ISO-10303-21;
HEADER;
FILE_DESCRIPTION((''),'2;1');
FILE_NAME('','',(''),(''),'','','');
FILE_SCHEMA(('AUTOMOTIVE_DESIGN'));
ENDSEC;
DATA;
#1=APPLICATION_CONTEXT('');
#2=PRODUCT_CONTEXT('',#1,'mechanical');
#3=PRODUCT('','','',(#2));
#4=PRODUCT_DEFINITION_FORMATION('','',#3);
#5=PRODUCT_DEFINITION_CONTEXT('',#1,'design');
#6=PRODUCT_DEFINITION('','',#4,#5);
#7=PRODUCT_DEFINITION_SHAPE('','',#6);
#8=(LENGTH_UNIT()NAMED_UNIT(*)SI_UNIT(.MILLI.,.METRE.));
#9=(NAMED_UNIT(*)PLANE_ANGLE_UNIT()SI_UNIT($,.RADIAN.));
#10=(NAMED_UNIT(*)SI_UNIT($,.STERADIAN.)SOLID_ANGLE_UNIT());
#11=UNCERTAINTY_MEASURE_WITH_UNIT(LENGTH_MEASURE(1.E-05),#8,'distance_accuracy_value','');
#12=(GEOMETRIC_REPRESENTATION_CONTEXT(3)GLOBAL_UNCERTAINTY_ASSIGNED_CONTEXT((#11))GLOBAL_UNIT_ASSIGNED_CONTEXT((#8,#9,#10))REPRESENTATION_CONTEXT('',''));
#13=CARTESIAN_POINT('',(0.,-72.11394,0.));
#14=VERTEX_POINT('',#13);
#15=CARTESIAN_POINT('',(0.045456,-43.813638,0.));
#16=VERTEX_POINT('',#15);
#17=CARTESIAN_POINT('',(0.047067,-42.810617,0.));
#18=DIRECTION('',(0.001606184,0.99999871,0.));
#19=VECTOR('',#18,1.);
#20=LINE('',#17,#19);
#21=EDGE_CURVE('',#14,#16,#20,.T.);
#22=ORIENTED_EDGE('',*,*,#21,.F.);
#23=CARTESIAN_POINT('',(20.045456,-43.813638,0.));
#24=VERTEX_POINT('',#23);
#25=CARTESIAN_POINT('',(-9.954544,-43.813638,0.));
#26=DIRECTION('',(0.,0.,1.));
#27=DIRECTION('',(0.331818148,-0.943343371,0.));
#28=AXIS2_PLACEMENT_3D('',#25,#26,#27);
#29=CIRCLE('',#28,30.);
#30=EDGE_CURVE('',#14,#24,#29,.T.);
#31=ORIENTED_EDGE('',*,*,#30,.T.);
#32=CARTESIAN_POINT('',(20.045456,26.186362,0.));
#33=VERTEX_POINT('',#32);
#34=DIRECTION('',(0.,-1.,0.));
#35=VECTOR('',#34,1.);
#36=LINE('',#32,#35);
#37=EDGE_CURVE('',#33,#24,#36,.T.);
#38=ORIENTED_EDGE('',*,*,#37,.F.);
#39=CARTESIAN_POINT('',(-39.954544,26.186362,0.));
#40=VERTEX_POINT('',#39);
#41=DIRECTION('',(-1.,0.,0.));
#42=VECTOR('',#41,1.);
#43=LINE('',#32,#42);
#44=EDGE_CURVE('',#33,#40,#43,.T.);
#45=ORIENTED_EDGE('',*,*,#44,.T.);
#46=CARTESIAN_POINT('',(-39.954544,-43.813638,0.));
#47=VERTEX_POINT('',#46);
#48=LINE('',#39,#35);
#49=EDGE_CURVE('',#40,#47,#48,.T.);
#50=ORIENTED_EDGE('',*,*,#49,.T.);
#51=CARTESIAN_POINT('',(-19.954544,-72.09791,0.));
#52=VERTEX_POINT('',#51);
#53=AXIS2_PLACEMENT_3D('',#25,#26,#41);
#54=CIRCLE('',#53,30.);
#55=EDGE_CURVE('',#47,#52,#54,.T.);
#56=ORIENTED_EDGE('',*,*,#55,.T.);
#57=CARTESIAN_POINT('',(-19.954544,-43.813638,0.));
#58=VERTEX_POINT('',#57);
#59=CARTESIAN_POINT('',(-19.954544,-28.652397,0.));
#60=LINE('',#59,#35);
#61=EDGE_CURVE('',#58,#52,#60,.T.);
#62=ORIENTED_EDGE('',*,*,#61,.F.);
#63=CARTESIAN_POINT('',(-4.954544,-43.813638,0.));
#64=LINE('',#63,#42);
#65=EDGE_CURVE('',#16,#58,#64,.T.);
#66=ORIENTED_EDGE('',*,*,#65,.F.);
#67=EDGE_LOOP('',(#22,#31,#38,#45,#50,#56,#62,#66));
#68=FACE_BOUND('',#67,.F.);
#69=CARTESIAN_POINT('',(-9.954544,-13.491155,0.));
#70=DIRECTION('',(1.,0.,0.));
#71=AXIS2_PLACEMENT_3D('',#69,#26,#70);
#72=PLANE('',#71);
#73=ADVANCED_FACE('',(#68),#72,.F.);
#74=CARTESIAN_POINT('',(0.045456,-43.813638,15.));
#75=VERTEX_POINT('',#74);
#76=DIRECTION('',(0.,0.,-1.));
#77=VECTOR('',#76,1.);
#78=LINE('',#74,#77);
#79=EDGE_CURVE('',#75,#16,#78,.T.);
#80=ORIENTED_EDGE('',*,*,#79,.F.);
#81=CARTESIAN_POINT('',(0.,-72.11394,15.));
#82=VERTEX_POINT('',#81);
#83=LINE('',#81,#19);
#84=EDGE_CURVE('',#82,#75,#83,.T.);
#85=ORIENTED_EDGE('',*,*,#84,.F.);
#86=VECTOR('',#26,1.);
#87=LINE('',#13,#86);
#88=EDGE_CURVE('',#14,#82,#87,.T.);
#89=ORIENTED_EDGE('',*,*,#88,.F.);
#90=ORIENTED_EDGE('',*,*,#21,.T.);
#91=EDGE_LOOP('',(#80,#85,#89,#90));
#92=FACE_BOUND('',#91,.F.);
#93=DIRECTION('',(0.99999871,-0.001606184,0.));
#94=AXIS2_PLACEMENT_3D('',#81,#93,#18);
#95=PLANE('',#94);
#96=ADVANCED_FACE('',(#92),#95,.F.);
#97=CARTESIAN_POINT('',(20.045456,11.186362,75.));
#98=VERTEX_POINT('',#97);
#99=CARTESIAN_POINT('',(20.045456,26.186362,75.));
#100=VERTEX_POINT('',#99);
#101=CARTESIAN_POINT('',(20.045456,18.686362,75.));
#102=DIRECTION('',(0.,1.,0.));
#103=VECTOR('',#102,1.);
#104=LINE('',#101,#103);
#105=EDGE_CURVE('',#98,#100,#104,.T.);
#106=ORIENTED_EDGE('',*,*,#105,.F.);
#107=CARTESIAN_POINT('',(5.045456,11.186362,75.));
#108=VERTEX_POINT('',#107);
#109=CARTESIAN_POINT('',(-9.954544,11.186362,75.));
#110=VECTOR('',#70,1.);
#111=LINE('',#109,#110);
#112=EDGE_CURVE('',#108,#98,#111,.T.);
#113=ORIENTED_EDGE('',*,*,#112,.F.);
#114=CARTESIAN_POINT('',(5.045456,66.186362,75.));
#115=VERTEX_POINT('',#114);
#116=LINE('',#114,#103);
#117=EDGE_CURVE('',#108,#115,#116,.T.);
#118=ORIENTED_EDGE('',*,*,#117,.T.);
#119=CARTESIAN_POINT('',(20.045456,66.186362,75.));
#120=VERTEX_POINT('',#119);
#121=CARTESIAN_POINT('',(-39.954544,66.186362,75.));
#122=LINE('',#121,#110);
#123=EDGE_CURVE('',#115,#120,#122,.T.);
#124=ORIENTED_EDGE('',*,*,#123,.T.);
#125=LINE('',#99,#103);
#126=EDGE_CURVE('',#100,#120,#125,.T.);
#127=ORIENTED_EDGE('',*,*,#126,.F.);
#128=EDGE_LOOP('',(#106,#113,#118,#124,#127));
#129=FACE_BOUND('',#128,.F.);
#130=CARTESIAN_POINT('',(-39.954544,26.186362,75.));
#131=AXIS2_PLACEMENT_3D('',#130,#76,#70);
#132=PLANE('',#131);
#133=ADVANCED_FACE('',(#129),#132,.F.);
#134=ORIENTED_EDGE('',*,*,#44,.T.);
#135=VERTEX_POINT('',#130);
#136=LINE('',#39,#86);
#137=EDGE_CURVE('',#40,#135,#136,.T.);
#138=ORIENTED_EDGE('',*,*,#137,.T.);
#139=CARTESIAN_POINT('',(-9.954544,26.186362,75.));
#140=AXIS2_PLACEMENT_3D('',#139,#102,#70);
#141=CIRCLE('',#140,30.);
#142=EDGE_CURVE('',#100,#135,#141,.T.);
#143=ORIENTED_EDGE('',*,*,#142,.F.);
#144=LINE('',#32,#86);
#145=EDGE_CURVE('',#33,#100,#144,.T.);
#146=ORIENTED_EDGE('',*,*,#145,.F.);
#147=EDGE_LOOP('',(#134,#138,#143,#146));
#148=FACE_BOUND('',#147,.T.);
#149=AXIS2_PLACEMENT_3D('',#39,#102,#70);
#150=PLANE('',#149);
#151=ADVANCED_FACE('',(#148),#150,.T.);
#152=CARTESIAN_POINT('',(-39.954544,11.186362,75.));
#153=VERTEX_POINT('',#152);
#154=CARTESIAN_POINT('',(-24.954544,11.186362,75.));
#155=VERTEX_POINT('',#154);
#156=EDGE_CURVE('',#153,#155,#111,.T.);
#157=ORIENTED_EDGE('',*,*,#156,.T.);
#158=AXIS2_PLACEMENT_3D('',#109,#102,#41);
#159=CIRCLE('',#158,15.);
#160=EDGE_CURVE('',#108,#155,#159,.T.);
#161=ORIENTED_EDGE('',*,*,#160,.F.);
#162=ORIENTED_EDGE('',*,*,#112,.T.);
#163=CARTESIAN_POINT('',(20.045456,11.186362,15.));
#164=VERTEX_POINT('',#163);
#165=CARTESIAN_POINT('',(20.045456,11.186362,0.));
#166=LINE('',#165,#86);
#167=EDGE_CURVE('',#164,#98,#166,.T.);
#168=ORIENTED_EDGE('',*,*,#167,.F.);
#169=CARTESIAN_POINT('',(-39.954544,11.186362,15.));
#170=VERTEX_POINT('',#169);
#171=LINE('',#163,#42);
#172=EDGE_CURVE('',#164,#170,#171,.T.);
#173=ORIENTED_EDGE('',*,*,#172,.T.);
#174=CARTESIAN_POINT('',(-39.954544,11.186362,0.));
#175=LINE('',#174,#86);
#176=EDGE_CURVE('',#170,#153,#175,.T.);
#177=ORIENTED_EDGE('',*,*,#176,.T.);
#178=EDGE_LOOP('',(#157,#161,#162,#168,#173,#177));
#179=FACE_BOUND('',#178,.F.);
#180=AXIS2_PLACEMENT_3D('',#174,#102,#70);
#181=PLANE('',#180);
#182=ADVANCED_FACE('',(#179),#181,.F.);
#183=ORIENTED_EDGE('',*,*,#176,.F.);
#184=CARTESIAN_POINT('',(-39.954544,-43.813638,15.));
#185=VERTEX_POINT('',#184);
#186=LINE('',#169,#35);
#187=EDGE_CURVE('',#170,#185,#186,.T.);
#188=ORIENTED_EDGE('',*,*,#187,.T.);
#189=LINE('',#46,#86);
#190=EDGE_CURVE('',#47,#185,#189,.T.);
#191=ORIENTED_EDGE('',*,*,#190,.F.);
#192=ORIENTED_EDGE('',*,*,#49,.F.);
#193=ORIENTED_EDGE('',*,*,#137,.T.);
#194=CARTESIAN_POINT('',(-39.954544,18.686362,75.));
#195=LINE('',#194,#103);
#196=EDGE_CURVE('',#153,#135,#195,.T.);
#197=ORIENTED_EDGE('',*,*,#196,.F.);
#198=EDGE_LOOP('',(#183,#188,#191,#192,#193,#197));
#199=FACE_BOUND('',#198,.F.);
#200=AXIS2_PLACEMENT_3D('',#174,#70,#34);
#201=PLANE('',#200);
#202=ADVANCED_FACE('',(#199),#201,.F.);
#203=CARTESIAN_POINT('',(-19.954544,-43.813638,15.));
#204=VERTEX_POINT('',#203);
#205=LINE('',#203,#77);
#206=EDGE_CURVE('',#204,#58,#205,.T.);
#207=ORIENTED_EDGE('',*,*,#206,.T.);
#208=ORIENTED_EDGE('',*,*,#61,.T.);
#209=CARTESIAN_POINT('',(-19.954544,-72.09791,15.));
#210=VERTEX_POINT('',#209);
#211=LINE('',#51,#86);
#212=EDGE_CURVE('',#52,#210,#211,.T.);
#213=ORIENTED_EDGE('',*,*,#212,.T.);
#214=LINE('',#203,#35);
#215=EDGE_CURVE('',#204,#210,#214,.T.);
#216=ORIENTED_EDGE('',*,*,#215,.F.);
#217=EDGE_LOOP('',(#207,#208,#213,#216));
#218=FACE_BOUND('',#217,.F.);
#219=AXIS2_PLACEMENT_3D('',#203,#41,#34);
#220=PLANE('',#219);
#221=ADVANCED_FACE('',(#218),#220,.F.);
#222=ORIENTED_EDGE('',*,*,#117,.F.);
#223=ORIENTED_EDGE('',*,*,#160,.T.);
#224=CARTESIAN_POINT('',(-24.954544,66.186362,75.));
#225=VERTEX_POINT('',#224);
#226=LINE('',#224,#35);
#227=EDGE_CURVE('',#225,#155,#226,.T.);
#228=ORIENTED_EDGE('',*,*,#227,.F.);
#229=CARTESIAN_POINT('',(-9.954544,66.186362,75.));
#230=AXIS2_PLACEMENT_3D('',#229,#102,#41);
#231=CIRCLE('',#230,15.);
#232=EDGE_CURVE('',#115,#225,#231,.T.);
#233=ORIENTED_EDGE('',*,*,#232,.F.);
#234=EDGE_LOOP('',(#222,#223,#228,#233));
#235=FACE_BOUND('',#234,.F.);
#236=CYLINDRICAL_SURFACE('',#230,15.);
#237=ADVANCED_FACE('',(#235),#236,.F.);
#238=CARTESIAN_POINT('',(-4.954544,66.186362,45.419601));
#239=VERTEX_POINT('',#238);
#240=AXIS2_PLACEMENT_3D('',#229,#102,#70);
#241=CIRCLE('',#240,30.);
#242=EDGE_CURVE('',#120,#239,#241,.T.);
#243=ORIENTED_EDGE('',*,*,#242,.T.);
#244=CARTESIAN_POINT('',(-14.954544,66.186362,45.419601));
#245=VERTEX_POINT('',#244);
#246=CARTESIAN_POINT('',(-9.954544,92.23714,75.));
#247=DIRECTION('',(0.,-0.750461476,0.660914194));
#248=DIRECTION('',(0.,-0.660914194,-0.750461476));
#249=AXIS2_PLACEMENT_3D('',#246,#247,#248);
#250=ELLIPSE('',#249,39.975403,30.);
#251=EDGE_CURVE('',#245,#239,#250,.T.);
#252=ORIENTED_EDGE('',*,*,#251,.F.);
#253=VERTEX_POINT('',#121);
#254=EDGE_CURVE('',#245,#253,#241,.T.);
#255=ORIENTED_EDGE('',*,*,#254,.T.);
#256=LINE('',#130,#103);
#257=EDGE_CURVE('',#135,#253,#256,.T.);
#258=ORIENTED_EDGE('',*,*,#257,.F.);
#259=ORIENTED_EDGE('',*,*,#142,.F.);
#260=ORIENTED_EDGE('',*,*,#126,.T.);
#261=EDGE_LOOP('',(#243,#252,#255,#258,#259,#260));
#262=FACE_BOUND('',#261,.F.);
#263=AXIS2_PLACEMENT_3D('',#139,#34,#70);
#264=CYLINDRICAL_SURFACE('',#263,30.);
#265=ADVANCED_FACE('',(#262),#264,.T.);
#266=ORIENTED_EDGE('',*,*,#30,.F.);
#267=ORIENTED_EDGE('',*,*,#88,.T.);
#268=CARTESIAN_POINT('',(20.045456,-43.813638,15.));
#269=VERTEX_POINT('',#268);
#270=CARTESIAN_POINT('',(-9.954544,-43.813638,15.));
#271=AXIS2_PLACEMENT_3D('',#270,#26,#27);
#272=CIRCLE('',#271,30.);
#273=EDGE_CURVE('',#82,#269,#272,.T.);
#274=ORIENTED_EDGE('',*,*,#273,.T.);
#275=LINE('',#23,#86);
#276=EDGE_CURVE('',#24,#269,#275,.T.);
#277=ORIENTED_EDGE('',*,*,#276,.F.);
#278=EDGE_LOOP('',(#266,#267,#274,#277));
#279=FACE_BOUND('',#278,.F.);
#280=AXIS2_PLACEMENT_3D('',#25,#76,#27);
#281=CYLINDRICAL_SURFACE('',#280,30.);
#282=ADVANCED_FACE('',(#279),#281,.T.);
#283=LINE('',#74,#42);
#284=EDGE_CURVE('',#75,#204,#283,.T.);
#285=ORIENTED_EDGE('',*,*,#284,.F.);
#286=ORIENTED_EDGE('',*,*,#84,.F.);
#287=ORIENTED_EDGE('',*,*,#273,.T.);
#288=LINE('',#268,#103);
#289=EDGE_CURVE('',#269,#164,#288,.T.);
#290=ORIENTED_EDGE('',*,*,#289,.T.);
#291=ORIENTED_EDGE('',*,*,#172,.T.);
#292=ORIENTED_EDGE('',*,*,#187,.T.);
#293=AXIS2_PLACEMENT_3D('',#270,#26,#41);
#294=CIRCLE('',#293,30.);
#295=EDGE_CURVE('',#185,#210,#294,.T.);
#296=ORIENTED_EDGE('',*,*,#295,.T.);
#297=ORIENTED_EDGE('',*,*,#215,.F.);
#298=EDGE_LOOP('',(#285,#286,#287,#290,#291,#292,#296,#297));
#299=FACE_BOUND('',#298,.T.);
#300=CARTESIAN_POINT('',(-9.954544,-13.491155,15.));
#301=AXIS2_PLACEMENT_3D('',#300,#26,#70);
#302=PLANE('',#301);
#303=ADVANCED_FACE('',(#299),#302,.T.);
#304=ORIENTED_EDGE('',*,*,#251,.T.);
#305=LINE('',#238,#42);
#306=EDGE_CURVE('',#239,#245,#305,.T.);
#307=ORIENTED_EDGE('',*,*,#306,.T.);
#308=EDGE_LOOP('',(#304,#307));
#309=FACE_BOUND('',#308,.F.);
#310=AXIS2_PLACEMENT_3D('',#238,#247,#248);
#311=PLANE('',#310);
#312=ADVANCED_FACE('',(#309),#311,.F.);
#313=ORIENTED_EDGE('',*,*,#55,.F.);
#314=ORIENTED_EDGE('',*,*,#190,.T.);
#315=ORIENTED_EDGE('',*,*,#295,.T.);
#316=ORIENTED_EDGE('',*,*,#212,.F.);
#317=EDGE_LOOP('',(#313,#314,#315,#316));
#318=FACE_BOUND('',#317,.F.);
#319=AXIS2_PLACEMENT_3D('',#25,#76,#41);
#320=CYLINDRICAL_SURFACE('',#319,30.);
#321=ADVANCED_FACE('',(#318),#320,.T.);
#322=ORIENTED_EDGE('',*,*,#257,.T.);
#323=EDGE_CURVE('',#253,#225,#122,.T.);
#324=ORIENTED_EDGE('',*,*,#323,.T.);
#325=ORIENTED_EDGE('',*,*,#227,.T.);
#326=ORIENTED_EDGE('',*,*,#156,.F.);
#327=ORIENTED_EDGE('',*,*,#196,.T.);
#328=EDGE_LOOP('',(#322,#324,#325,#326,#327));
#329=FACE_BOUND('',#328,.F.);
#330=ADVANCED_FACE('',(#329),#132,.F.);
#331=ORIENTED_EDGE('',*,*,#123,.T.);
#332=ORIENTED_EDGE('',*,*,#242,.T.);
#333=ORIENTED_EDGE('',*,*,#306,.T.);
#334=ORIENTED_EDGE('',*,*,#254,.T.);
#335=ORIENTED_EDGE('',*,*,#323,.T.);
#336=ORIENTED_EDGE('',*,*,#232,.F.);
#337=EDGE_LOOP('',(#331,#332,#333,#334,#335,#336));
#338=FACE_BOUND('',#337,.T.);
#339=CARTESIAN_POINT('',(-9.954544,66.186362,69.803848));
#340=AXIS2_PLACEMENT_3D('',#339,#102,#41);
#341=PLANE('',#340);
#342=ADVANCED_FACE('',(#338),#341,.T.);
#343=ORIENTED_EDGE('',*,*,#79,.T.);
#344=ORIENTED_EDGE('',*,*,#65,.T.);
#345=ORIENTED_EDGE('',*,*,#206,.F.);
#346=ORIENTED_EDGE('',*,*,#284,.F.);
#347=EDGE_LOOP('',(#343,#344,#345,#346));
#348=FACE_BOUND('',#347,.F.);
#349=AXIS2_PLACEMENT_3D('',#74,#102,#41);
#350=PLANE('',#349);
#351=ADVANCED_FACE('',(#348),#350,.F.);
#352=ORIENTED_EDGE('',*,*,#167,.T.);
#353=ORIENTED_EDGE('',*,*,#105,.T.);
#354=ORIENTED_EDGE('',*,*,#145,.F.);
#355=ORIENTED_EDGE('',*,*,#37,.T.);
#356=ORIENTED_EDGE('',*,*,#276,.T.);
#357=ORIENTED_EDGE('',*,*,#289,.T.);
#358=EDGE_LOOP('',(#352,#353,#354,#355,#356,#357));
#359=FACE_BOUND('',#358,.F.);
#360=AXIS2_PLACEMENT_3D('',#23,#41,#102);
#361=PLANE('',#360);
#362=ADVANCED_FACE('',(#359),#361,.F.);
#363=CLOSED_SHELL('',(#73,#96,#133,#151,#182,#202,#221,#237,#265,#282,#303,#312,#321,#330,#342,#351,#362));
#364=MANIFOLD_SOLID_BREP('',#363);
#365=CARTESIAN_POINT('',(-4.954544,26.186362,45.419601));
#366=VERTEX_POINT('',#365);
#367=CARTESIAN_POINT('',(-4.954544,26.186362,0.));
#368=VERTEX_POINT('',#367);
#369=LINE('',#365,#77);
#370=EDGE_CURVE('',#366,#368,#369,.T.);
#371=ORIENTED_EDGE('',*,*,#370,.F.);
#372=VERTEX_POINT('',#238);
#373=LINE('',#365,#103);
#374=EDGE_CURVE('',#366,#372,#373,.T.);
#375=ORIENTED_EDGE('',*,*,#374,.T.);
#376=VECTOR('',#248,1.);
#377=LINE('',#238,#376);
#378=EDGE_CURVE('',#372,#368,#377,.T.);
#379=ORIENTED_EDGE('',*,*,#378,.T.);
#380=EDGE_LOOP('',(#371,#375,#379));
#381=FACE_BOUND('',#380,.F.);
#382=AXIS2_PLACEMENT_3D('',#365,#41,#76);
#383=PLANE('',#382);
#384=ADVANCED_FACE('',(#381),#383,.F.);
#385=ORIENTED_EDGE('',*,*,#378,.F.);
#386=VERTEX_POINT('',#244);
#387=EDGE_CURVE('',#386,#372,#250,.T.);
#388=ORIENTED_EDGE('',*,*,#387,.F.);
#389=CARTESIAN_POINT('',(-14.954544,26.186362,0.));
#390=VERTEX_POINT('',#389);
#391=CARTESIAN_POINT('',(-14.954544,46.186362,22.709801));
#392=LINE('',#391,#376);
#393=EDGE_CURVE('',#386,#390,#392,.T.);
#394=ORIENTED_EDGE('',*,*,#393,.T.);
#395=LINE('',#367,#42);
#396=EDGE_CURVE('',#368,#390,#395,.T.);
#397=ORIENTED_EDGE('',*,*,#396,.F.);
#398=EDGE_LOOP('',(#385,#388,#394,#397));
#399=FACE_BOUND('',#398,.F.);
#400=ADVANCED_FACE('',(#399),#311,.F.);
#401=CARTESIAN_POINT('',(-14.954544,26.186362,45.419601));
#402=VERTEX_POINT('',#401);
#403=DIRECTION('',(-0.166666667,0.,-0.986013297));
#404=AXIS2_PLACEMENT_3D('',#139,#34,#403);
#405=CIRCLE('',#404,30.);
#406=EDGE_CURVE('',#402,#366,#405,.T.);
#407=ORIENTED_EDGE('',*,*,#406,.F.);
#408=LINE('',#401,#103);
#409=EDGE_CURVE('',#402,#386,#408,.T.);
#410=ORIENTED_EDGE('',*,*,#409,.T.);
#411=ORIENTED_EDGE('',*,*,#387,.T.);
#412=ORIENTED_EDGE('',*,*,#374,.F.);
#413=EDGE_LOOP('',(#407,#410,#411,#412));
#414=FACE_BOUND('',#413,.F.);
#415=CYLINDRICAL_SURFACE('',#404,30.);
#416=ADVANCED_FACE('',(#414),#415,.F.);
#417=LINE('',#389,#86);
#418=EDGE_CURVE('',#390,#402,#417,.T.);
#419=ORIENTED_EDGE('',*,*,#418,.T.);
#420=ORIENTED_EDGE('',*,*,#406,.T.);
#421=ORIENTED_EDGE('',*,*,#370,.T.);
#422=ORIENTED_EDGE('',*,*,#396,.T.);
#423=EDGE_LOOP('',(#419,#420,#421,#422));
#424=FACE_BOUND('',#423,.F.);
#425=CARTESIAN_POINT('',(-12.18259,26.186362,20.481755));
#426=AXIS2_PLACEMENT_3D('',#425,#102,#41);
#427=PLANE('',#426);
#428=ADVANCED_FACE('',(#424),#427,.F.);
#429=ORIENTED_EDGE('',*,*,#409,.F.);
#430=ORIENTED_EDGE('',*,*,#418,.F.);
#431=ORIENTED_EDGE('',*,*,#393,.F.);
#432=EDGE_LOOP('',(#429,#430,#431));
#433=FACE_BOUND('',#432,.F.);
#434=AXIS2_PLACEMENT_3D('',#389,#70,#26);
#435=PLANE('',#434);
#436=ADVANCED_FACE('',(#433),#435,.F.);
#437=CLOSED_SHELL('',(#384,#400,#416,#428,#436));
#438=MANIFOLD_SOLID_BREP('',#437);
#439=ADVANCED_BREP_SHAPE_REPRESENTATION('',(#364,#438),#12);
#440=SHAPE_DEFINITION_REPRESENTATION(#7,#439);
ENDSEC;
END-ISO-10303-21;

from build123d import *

# Parameters (mm, degrees)
F0_W      = 60
F0_H      = 15
F1_DEPTH  = 75
F2_DEPTH  = 15
F4_DEPTH  = 41.2
F6_DEPTH  = 40
F7_R      = 15
F8_DEPTH  = 168.2
F10_DEPTH = 40
F12_DEPTH = 25


with BuildPart() as f1:
    # F0 (on Top) → F1 (new body)
    with BuildSketch(Plane.XY):
        with Locations((-9.9545444548, 18.6863616109)):
            Rectangle(F0_W, F0_H)
    extrude(amount=F1_DEPTH)

    # F0 (on Top) → F2 (join)
    with BuildSketch(Plane.XY):
        with BuildLine():
            Line((20.0454555452, 11.1863616109), (-39.9545444548, 11.1863616109))
            Line((-39.9545444548, 11.1863616109), (-39.9545444548, -43.8136383891))
            ThreePointArc((-39.9545444548, -43.8136383891), (-9.9545444548, -13.8136383891), (20.0454555452, -43.8136383891))
            Line((20.0454555452, -43.8136383891), (20.0454555452, 11.1863616109))
        make_face()
        with BuildLine():
            ThreePointArc((20.0454555452, -43.8136383891), (-9.9545444548, -13.8136383891), (-39.9545444548, -43.8136383891))
            Line((-39.9545444548, -43.8136383891), (-19.9545444548, -43.8136383891))
            Line((-19.9545444548, -43.8136383891), (-9.9545444548, -43.8136383891))
            Line((-9.9545444548, -43.8136383891), (0.0454555452, -43.8136383891))
            Line((0.0454555452, -43.8136383891), (20.0454555452, -43.8136383891))
        make_face()
        with BuildLine():
            Line((-19.9545444548, -43.8136383891), (-39.9545444548, -43.8136383891))
            ThreePointArc((-39.9545444548, -43.8136383891), (-34.4494418826, -61.1341464648), (-19.9545444548, -72.0979096366))
            Line((-19.9545444548, -72.0979096366), (-19.9545444548, -43.8136383891))
        make_face()
        with BuildLine():
            ThreePointArc((0, -72.1139395306), (14.5264311553, -61.1538181223), (20.0454555452, -43.8136383891))
            Line((20.0454555452, -43.8136383891), (0.0454555452, -43.8136383891))
            Line((0.0454555452, -43.8136383891), (0, -72.1139395306))
        make_face()
        with BuildLine():
            Line((-9.9545444548, -43.8136383891), (-19.9545444548, -43.8136383891))
            Line((-19.9545444548, -43.8136383891), (-19.9545444548, -72.0979096366))
            ThreePointArc((-19.9545444548, -72.0979096366), (-9.9786440611, -73.8136287093), (0, -72.1139395306))
            Line((0, -72.1139395306), (0.0454555452, -43.8136383891))
            Line((0.0454555452, -43.8136383891), (-9.9545444548, -43.8136383891))
        make_face()
    extrude(amount=F2_DEPTH)

    # F3 (on face) → F4 (cut)
    with BuildSketch(Plane.XY.offset(15)):
        with BuildLine():
            Line((-19.9545444548, -43.8136383891), (-19.9545444548, -72.0979096366))
            ThreePointArc((-19.9545444548, -72.0979096366), (-9.9786440611, -73.8136287093), (0, -72.1139395306))
            Line((0, -72.1139395306), (0.0454555452, -43.8136383891))
            Line((0.0454555452, -43.8136383891), (-19.9545444548, -43.8136383891))
        make_face()
    extrude(amount=-F4_DEPTH, mode=Mode.SUBTRACT)

    # F5 (on face) → F6 (join)
    with BuildSketch(Plane(origin=(0, 26.1863616109, 0), x_dir=(-1, 0, 0), z_dir=(0, 1, 0))):
        with BuildLine():
            Line((24.9545444548, 75), (-5.0454555452, 75))
            ThreePointArc((-5.0454555452, 75), (9.9545444548, 60), (24.9545444548, 75))
        make_face()
        with BuildLine():
            ThreePointArc((24.9545444548, 75), (9.9545444548, 60), (-5.0454555452, 75))
            Line((-5.0454555452, 75), (-20.0454555452, 75))
            ThreePointArc((-20.0454555452, 75), (9.9545444548, 45), (39.9545444548, 75))
            Line((39.9545444548, 75), (24.9545444548, 75))
        make_face()
    extrude(amount=F6_DEPTH)

    # F7 (on face) → F8 (cut)
    with BuildSketch(Plane(origin=(0, 66.1863616109, 0), x_dir=(-1, 0, 0), z_dir=(0, 1, 0))):
        with Locations((9.9545444548, 75)):
            Circle(F7_R)
    extrude(amount=-F8_DEPTH, mode=Mode.SUBTRACT)


with BuildPart() as f10:
    # F9 (on face) → F10 (new body)
    with BuildSketch(Plane(origin=(0, 26.1863616109, 0), x_dir=(-1, 0, 0), z_dir=(0, 1, 0))):
        Polygon((14.9545444548, 45.4196010845), (4.9545444548, 0), (14.9545444548, 0), align=None)
        with BuildLine():
            Line((4.9545444548, 45.4196010845), (4.9545444548, 0))
            Line((4.9545444548, 0), (14.9545444548, 45.4196010845))
            ThreePointArc((14.9545444548, 45.4196010845), (9.9545444548, 45), (4.9545444548, 45.4196010845))
        make_face()
    extrude(amount=F10_DEPTH)


with BuildPart() as f12_tool:
    # F11 (on face) → F12 (new body)
    with BuildSketch(Plane.YZ.offset(-4.9545444548)):
        Polygon((66.1863616109, 0), (66.1863616109, 45.4196010845), (26.1863616109, 0), align=None)
    extrude(amount=-F12_DEPTH)


with BuildPart() as f1_1:
    add(f1.part)

    # F12: cut by f12_tool
    add(f12_tool.part, mode=Mode.SUBTRACT)


with BuildPart() as f10_1:
    add(f10.part)

    # F12: cut by f12_tool
    add(f12_tool.part, mode=Mode.SUBTRACT)


solid = Compound([f1_1.part, f10_1.part])
